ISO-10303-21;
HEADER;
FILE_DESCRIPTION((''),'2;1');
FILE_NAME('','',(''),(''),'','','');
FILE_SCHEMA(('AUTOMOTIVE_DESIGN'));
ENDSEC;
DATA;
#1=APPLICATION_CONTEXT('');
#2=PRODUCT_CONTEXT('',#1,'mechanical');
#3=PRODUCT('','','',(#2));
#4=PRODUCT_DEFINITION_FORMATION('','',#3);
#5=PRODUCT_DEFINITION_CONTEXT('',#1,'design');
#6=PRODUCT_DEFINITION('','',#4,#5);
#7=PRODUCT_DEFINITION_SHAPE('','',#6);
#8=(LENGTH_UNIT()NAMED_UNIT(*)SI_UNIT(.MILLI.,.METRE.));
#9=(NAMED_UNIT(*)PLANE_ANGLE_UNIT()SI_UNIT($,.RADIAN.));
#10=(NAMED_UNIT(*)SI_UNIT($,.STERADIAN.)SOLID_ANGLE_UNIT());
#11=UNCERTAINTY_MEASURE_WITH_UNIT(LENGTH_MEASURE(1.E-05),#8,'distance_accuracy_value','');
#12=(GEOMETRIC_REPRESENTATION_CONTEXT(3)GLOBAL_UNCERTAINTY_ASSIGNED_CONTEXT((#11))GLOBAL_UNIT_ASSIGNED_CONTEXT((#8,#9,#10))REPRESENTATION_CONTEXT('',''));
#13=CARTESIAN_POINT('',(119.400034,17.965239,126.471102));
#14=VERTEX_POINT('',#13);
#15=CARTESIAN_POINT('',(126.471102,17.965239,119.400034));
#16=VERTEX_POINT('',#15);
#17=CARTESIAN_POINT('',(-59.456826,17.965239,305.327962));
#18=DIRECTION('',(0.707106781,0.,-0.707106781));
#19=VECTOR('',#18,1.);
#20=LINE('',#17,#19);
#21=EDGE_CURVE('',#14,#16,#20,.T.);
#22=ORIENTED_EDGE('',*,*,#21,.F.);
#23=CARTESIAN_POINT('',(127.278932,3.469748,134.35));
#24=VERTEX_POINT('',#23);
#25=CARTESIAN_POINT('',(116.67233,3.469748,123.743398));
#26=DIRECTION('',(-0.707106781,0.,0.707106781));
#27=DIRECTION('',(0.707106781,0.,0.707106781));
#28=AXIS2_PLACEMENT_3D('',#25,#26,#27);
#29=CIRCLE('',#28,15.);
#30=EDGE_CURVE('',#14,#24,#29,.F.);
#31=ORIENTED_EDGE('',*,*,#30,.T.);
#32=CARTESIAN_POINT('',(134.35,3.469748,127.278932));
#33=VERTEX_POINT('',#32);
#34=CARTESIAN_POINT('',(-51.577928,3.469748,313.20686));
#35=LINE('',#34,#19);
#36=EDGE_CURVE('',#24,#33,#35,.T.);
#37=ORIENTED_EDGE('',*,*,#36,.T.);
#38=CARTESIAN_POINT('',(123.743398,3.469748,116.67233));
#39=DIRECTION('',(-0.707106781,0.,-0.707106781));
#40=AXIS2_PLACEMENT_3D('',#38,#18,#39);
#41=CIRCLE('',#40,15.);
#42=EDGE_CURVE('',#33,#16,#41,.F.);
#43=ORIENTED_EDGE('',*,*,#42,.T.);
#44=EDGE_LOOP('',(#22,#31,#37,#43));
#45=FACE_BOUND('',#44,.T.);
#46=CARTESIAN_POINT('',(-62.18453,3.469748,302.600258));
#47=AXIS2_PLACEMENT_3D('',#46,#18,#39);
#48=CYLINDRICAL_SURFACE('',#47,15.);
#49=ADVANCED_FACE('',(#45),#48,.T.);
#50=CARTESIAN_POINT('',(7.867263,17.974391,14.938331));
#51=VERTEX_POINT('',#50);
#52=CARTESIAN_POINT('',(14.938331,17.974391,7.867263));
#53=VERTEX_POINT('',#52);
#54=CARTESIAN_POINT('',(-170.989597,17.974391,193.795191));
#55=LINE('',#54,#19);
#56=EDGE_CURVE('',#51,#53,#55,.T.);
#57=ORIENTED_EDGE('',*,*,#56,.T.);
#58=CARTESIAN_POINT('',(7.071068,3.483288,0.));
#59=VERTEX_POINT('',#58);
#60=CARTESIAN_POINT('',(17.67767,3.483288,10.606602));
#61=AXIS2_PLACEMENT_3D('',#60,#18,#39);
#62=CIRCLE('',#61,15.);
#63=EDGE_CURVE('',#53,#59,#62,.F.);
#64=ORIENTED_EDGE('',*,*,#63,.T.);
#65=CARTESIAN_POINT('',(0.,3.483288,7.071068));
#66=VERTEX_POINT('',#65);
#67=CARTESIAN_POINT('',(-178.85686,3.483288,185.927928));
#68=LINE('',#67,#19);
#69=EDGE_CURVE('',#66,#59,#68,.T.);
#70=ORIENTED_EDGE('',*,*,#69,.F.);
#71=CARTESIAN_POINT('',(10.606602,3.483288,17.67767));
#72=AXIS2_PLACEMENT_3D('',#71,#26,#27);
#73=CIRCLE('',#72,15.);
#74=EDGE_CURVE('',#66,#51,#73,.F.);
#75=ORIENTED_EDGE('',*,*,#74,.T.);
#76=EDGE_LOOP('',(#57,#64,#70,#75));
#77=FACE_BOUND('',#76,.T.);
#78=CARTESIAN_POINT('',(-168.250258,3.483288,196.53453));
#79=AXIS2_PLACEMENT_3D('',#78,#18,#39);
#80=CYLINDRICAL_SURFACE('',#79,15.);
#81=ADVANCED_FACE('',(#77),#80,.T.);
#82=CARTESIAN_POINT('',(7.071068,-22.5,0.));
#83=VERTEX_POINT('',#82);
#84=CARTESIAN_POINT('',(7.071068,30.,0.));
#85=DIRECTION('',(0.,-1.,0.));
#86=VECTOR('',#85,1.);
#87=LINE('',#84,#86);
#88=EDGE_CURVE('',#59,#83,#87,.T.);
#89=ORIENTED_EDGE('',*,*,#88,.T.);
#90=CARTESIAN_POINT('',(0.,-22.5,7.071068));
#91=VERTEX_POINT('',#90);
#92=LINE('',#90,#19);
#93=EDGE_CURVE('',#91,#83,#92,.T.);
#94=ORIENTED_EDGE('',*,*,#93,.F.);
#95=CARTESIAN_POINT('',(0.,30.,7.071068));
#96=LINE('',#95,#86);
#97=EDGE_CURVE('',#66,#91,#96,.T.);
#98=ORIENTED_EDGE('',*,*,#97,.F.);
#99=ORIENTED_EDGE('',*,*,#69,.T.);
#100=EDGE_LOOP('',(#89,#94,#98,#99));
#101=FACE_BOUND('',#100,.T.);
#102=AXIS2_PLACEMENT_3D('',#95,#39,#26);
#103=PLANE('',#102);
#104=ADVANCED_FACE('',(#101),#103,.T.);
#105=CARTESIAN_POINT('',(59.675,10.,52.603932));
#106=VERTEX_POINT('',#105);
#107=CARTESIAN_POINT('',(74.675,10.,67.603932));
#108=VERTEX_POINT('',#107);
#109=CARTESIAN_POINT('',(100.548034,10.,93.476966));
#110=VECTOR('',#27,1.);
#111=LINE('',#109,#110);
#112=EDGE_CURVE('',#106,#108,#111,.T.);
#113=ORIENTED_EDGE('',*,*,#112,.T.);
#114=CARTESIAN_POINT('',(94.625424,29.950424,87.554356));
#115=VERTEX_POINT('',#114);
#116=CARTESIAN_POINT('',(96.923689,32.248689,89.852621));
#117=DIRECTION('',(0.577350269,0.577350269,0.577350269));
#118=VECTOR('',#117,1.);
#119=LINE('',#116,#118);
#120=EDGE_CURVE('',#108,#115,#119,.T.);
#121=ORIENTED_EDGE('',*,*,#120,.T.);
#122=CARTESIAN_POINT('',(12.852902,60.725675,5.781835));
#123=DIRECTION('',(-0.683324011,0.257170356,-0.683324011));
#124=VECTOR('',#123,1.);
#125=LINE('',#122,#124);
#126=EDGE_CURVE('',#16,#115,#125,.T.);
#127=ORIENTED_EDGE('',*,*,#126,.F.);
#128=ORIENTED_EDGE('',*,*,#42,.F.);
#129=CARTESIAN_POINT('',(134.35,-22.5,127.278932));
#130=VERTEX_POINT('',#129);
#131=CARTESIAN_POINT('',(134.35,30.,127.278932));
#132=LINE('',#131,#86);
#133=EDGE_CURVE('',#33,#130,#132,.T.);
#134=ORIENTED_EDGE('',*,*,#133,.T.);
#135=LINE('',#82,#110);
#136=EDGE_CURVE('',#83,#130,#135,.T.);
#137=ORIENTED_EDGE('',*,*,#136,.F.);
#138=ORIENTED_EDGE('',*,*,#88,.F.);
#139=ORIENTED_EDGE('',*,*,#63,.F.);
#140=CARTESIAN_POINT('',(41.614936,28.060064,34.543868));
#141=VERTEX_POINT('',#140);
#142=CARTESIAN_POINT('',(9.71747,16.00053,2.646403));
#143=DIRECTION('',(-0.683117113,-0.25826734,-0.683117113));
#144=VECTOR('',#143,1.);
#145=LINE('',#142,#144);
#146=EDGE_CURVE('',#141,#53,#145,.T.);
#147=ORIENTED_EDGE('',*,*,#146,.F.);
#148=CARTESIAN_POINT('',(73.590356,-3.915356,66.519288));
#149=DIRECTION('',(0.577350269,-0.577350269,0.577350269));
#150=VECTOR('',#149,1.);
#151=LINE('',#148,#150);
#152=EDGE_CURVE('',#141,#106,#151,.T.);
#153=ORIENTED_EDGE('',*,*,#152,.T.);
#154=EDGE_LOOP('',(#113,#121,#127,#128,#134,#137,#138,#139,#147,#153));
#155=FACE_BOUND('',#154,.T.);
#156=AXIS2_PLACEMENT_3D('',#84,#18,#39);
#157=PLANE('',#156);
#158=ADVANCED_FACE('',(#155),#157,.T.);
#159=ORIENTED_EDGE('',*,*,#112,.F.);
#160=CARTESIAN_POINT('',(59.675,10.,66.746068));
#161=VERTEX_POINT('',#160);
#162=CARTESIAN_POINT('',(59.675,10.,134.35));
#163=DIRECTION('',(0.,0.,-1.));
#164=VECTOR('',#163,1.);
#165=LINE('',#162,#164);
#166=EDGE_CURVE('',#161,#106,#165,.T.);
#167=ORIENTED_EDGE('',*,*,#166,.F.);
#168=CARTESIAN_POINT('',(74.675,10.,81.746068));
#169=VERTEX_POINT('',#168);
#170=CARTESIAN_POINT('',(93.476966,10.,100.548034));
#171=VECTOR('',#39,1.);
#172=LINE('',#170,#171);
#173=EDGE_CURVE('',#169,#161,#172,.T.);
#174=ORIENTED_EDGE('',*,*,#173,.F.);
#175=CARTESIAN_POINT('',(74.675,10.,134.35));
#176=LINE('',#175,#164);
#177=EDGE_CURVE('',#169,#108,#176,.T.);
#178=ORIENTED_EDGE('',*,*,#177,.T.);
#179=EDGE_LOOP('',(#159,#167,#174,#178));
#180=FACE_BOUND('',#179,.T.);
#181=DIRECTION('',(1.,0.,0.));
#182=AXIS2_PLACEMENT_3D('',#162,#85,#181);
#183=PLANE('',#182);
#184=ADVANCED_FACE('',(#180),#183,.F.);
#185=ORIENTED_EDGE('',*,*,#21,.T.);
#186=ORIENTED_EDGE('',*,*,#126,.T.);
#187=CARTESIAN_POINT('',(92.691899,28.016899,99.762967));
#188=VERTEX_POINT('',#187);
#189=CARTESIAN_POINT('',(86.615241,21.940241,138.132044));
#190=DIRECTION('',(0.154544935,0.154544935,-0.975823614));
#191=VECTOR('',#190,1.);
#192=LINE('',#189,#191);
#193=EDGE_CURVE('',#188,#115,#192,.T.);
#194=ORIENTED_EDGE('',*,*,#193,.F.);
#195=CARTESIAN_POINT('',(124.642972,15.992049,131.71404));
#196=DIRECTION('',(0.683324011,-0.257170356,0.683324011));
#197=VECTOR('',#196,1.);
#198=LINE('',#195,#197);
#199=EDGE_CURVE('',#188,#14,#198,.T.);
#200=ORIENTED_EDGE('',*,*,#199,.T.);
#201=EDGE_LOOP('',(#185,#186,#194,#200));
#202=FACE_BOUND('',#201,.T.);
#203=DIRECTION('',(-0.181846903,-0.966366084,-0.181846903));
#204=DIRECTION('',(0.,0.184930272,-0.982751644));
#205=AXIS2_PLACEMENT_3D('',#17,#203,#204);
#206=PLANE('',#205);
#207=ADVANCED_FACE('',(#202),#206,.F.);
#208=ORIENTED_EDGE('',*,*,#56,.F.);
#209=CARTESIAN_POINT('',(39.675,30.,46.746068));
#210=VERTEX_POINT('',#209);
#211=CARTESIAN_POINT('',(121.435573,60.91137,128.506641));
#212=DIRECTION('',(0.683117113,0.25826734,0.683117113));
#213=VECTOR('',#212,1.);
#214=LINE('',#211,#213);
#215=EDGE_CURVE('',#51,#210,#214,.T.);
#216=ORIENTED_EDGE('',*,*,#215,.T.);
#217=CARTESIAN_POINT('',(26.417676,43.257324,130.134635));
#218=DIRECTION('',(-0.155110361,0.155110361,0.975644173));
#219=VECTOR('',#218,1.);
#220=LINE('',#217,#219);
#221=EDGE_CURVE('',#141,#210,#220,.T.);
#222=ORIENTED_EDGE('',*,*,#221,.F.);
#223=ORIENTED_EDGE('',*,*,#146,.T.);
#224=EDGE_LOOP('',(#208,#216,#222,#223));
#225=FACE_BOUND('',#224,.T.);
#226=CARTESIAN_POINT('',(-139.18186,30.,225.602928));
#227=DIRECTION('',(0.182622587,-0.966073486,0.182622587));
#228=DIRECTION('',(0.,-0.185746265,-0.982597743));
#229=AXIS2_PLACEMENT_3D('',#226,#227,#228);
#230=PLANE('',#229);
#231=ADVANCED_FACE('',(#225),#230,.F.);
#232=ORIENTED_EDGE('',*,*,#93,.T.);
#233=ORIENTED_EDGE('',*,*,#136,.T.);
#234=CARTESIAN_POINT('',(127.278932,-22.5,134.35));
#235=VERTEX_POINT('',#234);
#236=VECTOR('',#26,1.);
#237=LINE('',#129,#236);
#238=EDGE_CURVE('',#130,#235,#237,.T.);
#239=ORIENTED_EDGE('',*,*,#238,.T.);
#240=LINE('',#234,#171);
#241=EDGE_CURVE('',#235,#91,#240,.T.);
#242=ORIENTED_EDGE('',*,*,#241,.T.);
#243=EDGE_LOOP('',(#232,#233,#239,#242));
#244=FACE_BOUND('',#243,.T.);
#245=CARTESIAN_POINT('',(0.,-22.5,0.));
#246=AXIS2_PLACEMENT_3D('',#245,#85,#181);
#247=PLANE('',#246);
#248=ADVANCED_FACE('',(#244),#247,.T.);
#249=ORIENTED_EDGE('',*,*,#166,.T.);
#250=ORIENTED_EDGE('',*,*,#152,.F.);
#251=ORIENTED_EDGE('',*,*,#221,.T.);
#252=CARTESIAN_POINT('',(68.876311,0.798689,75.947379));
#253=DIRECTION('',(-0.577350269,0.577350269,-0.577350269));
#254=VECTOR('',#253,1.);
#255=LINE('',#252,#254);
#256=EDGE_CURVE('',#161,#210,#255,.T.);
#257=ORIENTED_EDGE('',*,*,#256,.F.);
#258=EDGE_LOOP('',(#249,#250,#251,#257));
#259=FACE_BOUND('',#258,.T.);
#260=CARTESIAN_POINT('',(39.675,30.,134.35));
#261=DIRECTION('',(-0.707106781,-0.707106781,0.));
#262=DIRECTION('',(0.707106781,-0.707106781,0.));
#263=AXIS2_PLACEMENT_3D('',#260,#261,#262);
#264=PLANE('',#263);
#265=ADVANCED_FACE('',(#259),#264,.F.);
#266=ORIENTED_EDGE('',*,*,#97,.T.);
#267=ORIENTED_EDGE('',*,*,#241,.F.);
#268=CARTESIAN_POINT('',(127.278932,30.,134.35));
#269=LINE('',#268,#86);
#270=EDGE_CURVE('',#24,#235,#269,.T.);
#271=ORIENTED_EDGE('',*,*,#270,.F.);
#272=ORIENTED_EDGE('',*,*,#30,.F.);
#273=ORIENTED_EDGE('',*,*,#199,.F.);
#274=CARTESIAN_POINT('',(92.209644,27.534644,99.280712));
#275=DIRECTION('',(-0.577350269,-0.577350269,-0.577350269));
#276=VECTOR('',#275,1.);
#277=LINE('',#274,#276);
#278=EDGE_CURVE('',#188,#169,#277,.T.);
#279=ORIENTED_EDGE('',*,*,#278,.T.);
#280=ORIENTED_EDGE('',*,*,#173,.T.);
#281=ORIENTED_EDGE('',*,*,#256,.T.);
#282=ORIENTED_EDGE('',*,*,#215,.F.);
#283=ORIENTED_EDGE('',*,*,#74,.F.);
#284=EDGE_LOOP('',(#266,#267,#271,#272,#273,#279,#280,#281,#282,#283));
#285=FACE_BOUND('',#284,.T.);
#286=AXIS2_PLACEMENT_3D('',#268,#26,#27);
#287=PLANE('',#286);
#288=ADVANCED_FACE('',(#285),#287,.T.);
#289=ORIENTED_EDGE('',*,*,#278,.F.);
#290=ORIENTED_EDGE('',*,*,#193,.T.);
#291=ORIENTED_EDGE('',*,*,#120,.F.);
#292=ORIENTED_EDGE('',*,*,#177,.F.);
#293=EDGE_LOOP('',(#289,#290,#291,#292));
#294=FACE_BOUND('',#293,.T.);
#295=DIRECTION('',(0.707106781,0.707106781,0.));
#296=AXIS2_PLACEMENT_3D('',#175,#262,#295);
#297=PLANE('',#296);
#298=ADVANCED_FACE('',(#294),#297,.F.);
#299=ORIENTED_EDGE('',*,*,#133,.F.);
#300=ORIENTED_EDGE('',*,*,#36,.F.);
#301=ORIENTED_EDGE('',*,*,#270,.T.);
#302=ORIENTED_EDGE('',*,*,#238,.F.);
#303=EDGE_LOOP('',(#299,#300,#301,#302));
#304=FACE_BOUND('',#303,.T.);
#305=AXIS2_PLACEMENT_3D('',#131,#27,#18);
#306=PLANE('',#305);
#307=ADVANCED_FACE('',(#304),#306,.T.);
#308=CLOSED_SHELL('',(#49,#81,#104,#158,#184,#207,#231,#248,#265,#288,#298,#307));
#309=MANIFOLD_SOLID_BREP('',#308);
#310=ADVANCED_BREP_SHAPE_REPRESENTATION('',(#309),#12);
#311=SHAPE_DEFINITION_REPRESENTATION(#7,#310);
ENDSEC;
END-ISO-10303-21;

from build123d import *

# Parameters (mm, degrees)
EXTRUDE_1_DEPTH     = 134.35
SKETCH_2_OUTSIDE_W  = 174.82
SKETCH_2_OUTSIDE_H  = 174.82
CUT_EXTRUDE_1_DEPTH = 193.353437713
CUT_EXTRUDE_START   = -10
CUT_EXTRUDE_2_DEPTH = 10
EXTRUDE_2_DEPTH     = 22.5


# Read off the part's stored shape, not the designer's step: Вырез-Вытянуть2
with BuildPart() as part:
    # Эскиз1 → Бобышка-Вытянуть1 (new body)
    with BuildSketch(Plane.XY):
        Polygon((0, 0), (0, 30), (39.675, 30), (59.675, 10), (74.675, 10), (94.675, 30), (134.35, 30), (134.35, 0), align=None)
    extrude(amount=EXTRUDE_1_DEPTH)

    # Эскиз2 outside → Вырез-Вытянуть1 (cut, through all)
    with BuildSketch(Plane.XZ):
        with Locations((67.175, 67.175)):
            Rectangle(SKETCH_2_OUTSIDE_W, SKETCH_2_OUTSIDE_H)
        Polygon((127.278932188, 134.35), (0, 7.071067812), (7.071067812, 0), (134.35, 127.278932188), align=None, mode=Mode.SUBTRACT)
    extrude(amount=-CUT_EXTRUDE_1_DEPTH, mode=Mode.SUBTRACT)

    # Вырез-Вытянуть2 outline → Вырез-Вытянуть2 (cut)
    with BuildSketch(Plane(origin=(-3.535533906, 0, 3.535533906), x_dir=(0.7071067811865475, 0, 0.7071067811865477), z_dir=(-0.7071067811865477, 0, 0.7071067811865475)).offset(CUT_EXTRUDE_START)):
        with BuildLine():
            Line((5, 30), (5, 3.483288217))
            ThreePointArc((5, 3.483288217), (8.102307967, 12.618107552), (16.125989905, 17.974390514))
            Line((16.125989905, 17.974390514), (61.108923087, 30))
            Line((61.108923087, 30), (5, 30))
        make_face()
        with BuildLine():
            Line((184.999592105, 30), (128.634264977, 30))
            Line((128.634264977, 30), (128.820557467, 29.950423647))
            Line((128.820557467, 29.950423647), (173.857147448, 17.965239064))
            ThreePointArc((173.857147448, 17.965239064), (181.89209668, 12.611319604), (184.999592105, 3.469747807))
            Line((184.999592105, 3.469747807), (184.999592105, 30))
        make_face()
    extrude(amount=CUT_EXTRUDE_2_DEPTH, mode=Mode.SUBTRACT)

    # Эскиз5 → Бобышка-Вытянуть2 (add)
    with BuildSketch(Plane.XZ):
        Polygon((134.35, 127.278932188), (127.278932188, 134.35), (0, 7.071067812), (7.071067812, 0), align=None)
    extrude(amount=EXTRUDE_2_DEPTH)


solid = part.part
